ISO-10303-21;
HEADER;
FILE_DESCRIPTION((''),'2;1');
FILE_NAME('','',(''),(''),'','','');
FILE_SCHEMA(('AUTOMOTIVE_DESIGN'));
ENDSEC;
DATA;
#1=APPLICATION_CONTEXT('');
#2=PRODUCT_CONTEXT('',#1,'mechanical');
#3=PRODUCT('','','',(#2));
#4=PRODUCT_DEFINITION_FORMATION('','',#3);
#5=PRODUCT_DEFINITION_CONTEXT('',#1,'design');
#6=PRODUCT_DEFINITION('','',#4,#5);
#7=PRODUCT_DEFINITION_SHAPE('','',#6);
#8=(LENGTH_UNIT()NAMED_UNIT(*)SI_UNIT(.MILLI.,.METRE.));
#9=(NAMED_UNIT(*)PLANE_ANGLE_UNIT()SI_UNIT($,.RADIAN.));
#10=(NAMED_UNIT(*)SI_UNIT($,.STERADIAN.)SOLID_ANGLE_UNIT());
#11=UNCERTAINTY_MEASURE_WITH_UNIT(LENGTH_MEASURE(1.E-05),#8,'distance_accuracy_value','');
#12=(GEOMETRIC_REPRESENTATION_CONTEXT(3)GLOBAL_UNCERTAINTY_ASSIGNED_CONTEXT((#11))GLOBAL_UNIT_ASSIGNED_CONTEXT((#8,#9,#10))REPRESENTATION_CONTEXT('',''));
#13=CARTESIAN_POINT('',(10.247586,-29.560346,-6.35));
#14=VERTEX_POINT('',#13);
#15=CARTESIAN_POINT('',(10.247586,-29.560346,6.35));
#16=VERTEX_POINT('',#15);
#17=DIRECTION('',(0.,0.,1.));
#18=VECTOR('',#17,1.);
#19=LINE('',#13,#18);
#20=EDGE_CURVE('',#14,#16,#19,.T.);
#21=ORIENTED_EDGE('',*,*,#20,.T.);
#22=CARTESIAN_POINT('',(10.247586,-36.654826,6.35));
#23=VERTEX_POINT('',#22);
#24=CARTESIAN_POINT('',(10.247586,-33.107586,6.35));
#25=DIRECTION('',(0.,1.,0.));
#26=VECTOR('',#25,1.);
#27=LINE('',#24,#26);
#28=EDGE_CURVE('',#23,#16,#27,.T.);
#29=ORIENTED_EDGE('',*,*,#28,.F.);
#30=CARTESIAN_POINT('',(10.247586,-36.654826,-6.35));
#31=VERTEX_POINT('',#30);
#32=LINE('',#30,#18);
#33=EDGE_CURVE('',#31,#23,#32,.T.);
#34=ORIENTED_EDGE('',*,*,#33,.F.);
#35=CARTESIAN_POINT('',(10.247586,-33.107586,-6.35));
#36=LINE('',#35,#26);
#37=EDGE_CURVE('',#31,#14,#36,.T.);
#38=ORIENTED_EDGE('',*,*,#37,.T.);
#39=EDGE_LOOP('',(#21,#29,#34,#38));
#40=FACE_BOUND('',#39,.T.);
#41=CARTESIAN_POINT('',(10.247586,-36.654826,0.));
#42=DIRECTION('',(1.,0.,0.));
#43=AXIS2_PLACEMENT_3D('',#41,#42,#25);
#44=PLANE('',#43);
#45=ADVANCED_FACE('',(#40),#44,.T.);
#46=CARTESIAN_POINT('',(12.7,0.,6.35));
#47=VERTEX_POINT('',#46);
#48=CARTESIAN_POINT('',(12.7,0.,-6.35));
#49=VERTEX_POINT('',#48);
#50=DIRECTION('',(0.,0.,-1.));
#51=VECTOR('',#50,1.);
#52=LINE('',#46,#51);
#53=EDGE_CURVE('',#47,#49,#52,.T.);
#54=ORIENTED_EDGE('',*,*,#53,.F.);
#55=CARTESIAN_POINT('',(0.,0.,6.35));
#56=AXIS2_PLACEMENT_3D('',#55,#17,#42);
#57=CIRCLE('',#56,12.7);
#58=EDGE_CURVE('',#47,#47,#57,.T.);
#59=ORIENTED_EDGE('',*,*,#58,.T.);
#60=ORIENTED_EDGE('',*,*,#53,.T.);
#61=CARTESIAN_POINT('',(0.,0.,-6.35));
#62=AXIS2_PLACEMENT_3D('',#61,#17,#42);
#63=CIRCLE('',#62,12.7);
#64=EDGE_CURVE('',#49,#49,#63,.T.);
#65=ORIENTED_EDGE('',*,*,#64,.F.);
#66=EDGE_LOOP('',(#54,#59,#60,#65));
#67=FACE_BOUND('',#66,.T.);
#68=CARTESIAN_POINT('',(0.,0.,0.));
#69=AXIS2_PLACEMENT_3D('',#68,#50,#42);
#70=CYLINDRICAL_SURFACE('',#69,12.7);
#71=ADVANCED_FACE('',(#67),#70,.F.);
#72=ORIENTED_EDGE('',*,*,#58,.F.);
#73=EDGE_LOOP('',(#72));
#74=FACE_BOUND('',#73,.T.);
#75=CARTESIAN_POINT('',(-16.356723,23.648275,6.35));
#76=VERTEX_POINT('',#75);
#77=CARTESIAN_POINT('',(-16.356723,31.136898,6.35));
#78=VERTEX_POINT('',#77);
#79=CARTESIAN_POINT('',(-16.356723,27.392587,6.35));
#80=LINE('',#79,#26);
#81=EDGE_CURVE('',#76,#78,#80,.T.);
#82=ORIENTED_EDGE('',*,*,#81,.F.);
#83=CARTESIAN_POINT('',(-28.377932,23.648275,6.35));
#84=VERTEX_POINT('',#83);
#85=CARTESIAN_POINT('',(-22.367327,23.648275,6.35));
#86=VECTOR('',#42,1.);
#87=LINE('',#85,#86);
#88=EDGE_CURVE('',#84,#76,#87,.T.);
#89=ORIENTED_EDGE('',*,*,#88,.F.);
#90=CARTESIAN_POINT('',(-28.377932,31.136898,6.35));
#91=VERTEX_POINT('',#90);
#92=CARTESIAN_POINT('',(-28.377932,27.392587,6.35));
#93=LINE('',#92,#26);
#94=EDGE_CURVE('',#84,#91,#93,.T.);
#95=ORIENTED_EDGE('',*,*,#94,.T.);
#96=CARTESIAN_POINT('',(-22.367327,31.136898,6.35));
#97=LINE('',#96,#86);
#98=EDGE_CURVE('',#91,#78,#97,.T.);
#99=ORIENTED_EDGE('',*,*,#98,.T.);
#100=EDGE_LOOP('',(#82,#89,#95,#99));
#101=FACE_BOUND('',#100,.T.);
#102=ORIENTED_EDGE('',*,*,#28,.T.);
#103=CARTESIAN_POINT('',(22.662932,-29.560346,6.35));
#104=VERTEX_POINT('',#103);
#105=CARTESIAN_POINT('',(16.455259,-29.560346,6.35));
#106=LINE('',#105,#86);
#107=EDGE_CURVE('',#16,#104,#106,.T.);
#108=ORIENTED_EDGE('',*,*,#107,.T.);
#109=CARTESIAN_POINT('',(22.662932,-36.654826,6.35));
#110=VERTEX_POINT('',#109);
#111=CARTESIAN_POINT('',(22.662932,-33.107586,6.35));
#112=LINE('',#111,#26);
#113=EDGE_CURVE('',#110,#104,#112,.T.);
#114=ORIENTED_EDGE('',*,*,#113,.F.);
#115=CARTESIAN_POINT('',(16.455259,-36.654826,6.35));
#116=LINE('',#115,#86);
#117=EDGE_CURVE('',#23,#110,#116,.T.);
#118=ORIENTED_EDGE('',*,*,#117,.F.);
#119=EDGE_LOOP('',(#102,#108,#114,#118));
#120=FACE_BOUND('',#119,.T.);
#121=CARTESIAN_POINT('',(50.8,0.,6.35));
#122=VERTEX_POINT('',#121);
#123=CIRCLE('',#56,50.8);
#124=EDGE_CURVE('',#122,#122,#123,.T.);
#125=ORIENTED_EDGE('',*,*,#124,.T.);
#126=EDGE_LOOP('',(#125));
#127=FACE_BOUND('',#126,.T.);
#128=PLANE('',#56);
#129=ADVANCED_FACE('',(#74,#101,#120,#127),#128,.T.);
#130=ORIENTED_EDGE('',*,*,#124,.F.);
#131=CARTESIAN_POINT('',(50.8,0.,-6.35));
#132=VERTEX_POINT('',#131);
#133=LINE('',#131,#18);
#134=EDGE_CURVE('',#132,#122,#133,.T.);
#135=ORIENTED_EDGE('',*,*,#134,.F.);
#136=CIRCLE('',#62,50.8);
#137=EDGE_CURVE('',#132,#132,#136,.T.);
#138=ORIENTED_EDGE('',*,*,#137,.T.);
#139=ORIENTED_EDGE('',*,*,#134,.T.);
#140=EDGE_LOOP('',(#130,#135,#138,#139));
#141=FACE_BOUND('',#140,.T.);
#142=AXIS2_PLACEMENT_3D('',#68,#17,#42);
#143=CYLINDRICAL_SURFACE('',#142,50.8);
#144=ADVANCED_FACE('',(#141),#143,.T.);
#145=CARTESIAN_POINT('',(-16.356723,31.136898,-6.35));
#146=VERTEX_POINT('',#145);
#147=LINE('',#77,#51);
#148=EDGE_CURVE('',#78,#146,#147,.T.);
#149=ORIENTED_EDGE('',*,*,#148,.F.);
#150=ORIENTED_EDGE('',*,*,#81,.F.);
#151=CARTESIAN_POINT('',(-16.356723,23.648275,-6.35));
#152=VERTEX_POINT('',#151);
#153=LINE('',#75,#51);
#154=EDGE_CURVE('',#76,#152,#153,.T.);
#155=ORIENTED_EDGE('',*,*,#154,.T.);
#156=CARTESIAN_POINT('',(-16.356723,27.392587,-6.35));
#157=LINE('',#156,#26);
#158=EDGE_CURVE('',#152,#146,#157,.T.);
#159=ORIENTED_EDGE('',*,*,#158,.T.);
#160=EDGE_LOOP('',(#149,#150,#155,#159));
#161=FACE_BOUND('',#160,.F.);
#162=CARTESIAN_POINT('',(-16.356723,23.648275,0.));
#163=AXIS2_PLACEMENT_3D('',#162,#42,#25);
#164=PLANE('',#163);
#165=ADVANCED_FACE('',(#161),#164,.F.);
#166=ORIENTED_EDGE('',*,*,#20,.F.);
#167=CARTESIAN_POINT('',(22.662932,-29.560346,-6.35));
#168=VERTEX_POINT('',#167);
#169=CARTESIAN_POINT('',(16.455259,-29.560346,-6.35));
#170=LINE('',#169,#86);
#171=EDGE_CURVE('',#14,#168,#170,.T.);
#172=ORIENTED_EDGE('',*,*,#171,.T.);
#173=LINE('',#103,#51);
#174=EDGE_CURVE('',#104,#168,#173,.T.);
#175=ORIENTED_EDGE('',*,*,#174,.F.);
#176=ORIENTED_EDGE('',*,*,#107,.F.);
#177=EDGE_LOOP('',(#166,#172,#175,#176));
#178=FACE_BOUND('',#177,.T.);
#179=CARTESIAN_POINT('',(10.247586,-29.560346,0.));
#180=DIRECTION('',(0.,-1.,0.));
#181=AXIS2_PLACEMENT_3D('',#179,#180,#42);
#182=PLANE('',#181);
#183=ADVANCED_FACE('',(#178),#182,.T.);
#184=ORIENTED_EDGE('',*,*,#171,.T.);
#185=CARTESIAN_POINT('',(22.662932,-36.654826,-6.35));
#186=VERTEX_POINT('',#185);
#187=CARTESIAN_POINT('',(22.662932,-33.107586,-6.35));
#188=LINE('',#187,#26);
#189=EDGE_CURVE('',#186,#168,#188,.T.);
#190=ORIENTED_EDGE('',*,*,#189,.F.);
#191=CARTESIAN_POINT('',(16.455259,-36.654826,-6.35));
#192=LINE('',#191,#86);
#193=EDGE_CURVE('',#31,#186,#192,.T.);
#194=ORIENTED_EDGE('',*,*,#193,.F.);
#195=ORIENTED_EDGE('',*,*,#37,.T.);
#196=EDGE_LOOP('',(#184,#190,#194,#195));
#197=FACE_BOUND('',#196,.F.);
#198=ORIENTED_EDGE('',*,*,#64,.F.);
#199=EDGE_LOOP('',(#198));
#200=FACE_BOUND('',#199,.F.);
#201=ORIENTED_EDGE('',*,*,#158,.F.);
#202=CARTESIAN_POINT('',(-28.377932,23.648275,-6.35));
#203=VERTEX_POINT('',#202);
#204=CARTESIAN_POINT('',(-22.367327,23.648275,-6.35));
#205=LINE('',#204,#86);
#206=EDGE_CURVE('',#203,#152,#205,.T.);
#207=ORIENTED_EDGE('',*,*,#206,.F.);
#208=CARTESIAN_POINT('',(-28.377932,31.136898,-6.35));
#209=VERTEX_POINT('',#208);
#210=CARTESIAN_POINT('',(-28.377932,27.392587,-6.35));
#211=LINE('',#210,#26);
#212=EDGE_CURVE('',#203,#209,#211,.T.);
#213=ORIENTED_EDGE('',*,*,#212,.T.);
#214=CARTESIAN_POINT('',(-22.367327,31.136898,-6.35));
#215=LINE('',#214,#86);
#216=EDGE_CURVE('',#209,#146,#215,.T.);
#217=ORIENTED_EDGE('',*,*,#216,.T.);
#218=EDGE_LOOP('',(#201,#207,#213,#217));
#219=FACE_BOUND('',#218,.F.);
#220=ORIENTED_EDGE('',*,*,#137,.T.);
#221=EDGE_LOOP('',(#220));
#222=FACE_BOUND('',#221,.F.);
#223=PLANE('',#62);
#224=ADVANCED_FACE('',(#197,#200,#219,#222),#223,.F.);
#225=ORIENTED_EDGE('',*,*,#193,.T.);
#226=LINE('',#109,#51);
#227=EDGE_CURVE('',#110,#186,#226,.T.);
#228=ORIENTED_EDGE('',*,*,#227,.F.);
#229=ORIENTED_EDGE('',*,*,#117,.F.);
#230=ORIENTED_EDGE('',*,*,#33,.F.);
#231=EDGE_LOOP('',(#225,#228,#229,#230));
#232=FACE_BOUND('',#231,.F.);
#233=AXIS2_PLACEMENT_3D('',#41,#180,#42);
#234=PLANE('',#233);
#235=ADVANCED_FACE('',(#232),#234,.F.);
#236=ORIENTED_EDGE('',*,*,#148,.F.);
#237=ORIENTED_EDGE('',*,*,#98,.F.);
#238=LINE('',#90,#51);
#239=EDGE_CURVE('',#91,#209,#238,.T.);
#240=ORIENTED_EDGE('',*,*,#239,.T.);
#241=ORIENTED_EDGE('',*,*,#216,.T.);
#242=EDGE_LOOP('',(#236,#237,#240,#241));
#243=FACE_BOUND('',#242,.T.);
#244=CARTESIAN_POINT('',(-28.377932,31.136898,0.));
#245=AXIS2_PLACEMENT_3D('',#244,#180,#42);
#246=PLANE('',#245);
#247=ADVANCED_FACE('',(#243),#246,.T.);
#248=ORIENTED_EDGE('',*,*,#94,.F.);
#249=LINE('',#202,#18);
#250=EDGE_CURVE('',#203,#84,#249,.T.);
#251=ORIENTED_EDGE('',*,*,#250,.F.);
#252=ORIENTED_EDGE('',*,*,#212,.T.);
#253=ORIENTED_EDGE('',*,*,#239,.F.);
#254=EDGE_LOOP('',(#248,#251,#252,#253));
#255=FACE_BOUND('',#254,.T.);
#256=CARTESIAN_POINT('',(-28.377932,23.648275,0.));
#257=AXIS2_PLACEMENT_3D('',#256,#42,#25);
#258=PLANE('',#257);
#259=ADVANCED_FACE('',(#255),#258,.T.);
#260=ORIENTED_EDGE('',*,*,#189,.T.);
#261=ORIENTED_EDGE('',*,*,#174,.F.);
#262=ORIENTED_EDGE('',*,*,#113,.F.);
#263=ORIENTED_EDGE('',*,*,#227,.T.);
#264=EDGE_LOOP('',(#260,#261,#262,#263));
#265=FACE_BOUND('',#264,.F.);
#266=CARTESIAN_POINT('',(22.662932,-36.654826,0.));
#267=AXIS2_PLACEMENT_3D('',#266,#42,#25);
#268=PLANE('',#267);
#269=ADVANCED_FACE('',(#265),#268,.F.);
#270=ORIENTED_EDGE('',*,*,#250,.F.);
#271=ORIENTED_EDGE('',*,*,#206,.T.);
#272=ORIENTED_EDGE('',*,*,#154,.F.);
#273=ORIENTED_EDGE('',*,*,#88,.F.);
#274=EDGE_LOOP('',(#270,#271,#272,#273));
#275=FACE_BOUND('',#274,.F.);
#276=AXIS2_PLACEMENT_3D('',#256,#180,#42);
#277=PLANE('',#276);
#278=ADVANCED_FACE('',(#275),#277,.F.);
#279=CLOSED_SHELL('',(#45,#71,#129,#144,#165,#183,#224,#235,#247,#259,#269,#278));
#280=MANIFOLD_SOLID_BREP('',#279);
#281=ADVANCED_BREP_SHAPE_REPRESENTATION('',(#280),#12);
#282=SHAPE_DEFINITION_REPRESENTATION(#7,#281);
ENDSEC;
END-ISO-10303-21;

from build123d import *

# Parameters (mm, degrees)
F0_R     = 50.8
F0_R_2   = 12.7
F0_W     = 12.4153457582
F0_H     = 7.0944800973
F0_W_2   = 12.021208182
F0_H_2   = 7.4886232615
F1_DEPTH = 6.35


# Not quite as in the source:
# - a length typed as a fraction of an inch, garbled in the dataset ("3 / 203.2 mm" for 3/8 in), is restored


with BuildPart() as f1:
    # F0 (on Top) → F1 (new body, symmetric)
    with BuildSketch(Plane.XY):
        Circle(F0_R)
        Circle(F0_R_2, mode=Mode.SUBTRACT)
        with Locations((16.4552591741, -33.107586205)):
            Rectangle(F0_W, F0_H, mode=Mode.SUBTRACT)
        with Locations((-22.3673274741, 27.3925866932)):
            Rectangle(F0_W_2, F0_H_2, mode=Mode.SUBTRACT)
    extrude(amount=F1_DEPTH, both=True)


solid = f1.part
